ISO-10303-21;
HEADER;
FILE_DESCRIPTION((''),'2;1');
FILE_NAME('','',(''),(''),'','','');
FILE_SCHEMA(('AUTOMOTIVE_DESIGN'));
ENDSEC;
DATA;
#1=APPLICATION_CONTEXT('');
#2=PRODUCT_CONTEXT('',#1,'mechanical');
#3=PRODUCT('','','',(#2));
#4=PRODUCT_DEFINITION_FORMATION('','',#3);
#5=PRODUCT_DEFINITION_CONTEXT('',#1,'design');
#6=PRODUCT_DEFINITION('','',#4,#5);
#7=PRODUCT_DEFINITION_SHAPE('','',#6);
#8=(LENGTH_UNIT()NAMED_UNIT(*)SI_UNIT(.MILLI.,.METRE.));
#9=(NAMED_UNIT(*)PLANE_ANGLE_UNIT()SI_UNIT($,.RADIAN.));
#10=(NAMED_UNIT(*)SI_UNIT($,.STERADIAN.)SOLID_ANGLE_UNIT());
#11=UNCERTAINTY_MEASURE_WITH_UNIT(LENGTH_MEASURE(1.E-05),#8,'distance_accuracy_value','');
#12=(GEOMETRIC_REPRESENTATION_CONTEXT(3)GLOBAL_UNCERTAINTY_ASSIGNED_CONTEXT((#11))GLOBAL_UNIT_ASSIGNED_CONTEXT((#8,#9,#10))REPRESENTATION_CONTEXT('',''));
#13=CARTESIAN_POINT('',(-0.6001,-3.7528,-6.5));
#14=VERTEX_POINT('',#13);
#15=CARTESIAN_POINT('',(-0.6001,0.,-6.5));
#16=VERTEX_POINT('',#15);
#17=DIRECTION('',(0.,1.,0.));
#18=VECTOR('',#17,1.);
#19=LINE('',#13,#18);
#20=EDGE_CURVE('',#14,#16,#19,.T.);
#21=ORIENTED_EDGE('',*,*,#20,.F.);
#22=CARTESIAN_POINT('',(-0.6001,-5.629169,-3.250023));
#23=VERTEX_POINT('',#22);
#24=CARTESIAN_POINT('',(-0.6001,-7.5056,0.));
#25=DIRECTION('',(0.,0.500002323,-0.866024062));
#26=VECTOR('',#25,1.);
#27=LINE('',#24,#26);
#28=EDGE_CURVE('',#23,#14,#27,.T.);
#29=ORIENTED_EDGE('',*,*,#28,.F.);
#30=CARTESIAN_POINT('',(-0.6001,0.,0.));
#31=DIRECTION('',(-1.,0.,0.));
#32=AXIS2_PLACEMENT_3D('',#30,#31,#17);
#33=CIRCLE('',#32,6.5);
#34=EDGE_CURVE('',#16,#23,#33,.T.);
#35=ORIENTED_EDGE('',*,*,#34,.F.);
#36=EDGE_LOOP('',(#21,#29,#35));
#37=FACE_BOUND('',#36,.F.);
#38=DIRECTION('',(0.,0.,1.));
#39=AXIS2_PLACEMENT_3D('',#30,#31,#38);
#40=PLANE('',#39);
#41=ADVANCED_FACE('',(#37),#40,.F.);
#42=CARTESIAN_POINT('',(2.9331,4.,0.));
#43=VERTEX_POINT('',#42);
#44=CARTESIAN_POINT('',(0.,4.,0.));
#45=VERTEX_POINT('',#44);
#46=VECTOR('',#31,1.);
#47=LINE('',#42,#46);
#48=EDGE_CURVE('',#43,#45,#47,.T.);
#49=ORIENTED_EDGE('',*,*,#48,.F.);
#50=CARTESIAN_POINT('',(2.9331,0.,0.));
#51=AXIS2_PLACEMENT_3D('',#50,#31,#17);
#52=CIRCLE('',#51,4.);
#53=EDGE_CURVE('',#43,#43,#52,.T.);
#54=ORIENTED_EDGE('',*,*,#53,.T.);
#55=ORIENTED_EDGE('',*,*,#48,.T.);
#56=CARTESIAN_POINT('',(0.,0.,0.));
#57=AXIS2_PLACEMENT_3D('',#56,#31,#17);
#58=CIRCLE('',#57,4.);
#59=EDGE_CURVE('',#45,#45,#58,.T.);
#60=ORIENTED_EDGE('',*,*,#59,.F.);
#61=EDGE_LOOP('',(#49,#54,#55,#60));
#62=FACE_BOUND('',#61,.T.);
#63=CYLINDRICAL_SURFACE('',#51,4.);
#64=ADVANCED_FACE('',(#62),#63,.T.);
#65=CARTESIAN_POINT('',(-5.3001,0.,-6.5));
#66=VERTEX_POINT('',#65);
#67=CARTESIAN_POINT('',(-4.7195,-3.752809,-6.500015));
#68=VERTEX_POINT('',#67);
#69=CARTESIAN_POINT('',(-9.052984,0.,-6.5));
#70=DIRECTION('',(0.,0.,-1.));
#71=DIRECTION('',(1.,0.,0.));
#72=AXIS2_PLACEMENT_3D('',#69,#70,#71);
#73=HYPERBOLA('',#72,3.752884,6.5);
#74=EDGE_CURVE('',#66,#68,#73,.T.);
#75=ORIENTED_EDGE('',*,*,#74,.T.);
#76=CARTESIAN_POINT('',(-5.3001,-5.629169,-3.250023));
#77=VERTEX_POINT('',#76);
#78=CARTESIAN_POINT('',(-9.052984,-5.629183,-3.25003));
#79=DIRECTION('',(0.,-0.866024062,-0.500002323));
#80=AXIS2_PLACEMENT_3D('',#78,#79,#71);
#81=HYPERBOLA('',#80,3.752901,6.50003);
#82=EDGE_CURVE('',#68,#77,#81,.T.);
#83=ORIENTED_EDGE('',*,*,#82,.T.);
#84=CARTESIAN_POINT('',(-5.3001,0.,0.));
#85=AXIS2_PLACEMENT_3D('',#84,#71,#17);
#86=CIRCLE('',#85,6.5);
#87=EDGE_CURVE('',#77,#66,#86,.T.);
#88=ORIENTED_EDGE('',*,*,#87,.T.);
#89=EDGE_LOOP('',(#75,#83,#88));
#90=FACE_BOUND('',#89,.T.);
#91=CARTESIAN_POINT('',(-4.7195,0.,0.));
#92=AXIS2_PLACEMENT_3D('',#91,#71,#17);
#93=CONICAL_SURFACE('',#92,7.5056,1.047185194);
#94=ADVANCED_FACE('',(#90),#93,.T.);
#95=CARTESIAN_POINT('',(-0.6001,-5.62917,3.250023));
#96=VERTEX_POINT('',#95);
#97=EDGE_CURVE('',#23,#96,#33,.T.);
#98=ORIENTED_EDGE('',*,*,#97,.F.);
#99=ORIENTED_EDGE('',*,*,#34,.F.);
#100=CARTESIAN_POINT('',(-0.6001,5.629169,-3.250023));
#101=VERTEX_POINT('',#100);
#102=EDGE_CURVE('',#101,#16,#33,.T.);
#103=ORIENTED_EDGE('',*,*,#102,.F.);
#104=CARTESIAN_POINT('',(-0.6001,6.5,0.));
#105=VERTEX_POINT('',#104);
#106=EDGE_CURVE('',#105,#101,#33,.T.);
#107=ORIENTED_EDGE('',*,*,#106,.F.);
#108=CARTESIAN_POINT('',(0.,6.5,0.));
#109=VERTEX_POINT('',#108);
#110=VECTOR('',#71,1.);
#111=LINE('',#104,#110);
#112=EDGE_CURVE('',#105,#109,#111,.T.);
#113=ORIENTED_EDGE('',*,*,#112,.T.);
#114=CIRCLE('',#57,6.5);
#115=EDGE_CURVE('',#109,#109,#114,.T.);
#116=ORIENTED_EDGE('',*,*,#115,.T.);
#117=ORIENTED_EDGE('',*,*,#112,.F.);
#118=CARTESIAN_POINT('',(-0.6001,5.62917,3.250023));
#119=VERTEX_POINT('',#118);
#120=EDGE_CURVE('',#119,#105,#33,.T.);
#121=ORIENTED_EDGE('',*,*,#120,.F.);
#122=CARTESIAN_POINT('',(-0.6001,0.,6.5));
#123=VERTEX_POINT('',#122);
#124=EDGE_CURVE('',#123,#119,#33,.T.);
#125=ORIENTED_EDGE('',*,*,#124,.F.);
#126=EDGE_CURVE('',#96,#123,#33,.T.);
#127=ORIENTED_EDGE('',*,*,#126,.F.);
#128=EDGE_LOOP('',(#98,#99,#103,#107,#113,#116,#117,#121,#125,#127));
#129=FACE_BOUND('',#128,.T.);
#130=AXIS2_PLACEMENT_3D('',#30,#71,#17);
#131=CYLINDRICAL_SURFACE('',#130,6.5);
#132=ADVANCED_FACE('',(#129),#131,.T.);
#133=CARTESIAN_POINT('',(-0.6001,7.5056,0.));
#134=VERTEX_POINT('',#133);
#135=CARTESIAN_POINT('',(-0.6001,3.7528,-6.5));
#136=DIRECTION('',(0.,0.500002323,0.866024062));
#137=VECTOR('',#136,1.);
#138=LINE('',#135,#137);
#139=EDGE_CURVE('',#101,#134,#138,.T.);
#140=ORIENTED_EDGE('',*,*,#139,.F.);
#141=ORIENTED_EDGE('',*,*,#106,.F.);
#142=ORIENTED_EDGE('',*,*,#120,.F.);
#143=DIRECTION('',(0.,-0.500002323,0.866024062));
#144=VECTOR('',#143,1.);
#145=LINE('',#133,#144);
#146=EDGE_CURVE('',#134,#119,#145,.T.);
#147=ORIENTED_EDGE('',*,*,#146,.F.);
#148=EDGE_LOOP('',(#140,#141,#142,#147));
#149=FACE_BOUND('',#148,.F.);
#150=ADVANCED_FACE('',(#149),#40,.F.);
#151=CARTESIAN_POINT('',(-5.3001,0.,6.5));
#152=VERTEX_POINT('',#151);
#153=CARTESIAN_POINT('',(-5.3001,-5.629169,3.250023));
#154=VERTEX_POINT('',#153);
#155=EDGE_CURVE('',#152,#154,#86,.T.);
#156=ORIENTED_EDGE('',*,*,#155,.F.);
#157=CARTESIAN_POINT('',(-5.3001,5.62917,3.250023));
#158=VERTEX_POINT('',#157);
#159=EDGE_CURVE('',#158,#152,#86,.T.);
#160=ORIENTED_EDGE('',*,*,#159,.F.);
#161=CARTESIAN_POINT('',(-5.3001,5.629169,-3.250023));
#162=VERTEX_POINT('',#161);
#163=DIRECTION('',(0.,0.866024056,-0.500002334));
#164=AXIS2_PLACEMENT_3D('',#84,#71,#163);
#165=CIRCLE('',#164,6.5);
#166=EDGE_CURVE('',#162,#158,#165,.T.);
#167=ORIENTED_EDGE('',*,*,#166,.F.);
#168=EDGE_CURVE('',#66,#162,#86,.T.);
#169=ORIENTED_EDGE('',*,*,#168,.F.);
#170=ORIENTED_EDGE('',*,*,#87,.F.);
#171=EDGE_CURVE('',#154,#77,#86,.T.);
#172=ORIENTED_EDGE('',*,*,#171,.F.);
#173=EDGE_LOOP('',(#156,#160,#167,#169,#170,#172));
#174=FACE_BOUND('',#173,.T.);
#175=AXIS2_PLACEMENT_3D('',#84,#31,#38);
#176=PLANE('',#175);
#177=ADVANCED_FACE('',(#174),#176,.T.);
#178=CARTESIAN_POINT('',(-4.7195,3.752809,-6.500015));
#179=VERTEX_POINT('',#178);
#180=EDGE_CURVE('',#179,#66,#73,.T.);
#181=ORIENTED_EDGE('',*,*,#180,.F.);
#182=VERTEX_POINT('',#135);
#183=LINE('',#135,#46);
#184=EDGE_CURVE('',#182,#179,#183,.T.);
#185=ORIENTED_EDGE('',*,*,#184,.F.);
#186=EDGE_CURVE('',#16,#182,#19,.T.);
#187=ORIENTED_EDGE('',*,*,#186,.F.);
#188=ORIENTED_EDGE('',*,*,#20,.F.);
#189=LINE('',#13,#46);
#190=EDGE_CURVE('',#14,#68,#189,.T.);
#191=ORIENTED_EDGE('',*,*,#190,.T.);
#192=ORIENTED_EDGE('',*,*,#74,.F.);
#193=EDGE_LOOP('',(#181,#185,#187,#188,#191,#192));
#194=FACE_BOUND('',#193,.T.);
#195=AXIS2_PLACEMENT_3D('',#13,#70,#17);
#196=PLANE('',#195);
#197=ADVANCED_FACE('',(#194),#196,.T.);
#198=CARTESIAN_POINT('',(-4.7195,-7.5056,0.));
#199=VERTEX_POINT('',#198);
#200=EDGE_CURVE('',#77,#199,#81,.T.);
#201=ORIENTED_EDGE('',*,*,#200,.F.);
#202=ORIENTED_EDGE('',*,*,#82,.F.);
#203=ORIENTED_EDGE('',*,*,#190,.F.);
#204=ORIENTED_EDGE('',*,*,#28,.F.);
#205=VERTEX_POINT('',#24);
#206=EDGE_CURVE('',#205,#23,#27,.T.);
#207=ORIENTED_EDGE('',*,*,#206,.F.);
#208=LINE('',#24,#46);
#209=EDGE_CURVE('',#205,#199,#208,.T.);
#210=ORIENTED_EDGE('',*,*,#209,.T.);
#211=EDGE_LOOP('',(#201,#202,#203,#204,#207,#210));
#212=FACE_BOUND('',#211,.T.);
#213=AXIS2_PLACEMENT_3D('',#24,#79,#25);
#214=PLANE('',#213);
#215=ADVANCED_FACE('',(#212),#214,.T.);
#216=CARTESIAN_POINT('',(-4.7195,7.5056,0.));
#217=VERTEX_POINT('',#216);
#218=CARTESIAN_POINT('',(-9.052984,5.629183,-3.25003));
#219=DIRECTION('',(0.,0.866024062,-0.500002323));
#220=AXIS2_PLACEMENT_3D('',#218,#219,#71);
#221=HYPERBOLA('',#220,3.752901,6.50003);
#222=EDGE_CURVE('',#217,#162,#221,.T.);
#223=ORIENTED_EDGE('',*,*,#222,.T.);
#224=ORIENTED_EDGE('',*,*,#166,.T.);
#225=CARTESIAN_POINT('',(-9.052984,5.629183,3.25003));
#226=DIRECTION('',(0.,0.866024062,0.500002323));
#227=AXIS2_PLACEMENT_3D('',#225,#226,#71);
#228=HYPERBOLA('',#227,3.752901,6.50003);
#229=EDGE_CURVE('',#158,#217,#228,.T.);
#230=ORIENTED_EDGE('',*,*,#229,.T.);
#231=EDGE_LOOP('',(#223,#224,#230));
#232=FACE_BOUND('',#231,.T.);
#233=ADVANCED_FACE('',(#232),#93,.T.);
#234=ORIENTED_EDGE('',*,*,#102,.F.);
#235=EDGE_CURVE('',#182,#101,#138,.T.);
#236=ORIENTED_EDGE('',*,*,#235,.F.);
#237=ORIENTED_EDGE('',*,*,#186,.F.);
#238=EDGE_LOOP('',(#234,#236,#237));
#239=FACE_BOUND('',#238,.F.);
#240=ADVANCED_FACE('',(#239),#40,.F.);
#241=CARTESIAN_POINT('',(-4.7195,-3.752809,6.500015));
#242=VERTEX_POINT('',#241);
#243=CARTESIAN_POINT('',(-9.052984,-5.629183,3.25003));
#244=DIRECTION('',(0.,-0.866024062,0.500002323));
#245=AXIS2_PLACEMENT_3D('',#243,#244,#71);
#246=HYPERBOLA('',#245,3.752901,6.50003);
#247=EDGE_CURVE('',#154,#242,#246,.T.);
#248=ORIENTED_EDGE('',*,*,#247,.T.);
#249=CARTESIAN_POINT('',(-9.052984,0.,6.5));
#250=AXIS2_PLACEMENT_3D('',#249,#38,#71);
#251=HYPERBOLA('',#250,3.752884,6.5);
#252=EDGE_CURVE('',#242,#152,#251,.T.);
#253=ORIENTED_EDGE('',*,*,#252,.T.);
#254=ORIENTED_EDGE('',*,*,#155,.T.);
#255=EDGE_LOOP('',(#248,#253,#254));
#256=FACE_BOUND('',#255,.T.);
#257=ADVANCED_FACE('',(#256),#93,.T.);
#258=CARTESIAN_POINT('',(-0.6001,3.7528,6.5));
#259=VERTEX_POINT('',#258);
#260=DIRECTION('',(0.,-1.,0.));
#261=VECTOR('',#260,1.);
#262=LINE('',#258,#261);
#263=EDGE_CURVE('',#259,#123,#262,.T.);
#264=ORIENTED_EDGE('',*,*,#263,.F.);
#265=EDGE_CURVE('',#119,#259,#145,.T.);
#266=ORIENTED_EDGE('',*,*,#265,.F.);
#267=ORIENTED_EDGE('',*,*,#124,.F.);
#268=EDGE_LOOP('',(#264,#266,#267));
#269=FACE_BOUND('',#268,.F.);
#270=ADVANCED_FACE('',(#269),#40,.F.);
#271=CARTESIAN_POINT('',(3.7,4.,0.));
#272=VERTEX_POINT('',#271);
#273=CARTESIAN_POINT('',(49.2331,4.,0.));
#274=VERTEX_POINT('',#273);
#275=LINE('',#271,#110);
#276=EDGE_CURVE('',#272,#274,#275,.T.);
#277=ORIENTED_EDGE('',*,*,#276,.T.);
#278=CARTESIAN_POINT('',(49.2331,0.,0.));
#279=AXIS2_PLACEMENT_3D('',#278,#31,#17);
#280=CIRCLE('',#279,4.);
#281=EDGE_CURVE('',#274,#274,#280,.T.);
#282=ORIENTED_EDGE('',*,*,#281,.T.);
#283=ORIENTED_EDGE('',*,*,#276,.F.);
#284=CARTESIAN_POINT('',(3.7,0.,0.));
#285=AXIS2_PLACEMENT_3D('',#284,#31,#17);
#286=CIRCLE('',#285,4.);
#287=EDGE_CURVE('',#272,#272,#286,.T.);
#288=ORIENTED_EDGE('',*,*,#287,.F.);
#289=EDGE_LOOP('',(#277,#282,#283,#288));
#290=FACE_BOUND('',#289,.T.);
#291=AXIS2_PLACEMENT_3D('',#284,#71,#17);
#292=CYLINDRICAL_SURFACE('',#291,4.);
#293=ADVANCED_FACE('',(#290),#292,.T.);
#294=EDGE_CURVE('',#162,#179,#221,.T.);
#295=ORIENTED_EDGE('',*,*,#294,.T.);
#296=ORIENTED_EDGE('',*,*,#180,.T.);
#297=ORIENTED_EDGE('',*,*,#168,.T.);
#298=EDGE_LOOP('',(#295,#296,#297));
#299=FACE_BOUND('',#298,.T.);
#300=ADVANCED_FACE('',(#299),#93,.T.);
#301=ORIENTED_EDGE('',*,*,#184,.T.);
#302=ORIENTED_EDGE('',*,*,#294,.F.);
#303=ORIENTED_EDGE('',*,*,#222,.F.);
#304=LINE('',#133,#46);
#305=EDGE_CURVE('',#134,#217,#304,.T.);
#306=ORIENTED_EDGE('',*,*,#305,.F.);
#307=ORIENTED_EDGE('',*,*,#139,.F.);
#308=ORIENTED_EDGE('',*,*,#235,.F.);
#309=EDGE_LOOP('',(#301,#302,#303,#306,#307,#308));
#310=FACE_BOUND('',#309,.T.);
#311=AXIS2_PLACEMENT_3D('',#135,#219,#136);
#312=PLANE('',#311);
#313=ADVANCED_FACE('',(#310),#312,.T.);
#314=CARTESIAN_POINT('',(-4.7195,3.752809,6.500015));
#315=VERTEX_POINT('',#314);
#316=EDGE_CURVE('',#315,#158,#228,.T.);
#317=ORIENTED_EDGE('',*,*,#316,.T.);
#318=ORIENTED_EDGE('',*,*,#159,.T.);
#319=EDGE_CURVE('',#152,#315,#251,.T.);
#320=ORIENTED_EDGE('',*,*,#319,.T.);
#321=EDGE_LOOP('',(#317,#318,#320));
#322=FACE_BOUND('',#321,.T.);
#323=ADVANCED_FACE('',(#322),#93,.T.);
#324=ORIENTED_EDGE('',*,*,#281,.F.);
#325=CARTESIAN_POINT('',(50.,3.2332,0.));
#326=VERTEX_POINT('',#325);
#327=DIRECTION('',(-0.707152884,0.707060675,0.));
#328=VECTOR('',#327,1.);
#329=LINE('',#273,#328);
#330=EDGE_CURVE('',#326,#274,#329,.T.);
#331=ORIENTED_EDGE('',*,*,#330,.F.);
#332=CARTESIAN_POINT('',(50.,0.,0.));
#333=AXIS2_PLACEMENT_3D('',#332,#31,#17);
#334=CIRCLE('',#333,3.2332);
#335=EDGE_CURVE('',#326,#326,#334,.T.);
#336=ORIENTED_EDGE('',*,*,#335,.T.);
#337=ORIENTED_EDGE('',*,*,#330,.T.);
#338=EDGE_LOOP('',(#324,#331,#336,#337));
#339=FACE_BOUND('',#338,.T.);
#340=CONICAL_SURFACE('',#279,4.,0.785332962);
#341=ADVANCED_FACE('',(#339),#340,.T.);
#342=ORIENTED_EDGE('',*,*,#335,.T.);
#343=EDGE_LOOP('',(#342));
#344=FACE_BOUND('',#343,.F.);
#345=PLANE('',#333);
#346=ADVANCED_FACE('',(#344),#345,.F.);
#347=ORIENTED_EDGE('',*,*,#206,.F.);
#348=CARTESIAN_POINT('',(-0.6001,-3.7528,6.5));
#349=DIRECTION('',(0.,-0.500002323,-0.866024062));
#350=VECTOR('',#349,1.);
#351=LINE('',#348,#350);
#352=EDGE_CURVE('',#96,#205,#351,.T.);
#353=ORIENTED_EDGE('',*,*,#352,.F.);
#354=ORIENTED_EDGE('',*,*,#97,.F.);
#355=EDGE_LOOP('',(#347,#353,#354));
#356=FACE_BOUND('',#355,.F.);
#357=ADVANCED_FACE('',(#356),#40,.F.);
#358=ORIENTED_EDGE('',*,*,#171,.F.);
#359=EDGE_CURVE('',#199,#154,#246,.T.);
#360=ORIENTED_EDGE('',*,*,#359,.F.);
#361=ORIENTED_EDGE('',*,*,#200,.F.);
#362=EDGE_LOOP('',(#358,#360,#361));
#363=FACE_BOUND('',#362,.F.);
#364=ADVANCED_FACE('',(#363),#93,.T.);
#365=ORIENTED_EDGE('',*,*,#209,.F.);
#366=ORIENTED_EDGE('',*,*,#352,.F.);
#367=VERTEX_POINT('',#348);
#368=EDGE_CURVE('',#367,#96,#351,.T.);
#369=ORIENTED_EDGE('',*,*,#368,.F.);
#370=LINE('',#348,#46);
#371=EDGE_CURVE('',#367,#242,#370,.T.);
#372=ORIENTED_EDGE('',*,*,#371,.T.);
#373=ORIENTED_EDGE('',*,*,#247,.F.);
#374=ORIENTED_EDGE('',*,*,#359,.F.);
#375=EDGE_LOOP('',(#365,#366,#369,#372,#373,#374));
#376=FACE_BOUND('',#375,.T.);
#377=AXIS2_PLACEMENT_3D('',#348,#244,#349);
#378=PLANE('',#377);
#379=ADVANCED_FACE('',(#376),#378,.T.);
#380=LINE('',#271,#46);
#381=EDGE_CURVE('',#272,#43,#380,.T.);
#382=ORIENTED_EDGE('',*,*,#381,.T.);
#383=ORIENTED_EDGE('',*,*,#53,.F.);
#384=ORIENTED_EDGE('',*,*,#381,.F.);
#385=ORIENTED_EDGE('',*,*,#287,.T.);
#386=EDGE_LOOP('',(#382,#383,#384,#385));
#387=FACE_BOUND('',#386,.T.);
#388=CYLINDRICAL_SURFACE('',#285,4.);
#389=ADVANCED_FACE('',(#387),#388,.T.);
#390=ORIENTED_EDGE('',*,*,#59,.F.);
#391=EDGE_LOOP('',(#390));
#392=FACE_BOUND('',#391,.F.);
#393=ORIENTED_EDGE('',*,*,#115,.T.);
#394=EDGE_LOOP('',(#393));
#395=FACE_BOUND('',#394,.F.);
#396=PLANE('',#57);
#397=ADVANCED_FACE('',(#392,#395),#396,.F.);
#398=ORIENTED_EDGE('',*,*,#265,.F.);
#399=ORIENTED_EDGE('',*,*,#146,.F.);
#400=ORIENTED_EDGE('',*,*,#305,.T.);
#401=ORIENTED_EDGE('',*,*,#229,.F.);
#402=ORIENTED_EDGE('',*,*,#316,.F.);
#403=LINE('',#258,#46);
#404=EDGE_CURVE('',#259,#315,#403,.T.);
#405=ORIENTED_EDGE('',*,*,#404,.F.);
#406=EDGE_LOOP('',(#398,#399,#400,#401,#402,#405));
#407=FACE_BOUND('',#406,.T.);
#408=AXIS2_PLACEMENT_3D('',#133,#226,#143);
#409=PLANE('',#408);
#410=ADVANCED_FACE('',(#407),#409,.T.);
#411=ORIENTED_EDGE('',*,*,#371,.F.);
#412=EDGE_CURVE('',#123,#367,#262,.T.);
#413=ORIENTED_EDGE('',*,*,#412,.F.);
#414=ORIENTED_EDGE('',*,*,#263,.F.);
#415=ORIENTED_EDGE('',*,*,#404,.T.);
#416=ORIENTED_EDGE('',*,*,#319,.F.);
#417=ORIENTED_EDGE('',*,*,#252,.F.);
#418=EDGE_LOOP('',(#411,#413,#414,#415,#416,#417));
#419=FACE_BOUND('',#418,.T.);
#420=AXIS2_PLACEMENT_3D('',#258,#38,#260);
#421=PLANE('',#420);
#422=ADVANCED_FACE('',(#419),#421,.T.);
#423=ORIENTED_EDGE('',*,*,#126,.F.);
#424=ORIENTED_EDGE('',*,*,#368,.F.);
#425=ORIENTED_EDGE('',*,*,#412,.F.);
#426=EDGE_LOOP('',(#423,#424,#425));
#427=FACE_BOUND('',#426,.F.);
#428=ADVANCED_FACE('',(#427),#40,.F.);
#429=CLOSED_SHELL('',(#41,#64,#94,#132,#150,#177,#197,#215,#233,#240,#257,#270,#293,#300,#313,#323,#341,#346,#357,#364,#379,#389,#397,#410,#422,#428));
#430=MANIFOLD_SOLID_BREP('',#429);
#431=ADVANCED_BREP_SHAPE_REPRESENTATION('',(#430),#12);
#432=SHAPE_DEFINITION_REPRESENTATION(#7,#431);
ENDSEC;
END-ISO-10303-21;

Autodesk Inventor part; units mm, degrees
ref_plane "YZ Plane" through (0, 0, 0) normal (1, 0, 0) x (0, 1, 0)
ref_plane "XZ Plane" through (0, 0, 0) normal (0, 1, 0) x (-1, 0, 0)
sketch "Sketch1" plane through (0, 0, 0) normal (0, 0, 1) x (1, 0, 0)
  line L0 (0, 6.5) -> (0, 4)
  line L1 (3.7, 4) -> (50, 4)
  line L2 (50, 4) -> (50, 0)
  line L3 (50, 0) -> (-0.6001, 0)
  line L4 (-10.7201, 0) -> (60.12, 0) projected
  line L5 (-0.6001, 0) -> (-0.6001, 6.5)
  line L6 (-0.6001, 6.5) -> (0, 6.5)
  line L7 (3.7, 4) -> (2.9331, 4)
  line L8 (2.9331, 4) -> (0, 4)
  line L9 (0, -1.3) -> (0, 7.8) projected
  dimension "d0" = 50
  dimension "d1" = 46.3
  dimension "d2" = 8
  dimension "d9" = 0.6001
  dimension "d10" = 13
  dimension "d13" = 0.7669
  dimension "d14" = 8
revolve "Body" add sketch "Sketch1" angle 360 about axis through (50, 0, 0) along (-1, 0, 0)
sketch "Sketch2" plane through (-0.6001, 0, 0) normal (-1, 0, 0) x (0, 0, 1)
  line L0 (0, 7.5056) -> (6.5, 3.7528)
  line L1 (6.5, 3.7528) -> (6.5, -3.7528)
  line L2 (6.5, -3.7528) -> (0, -7.5056)
  line L3 (0, -7.5056) -> (-6.5, -3.7528)
  line L4 (-6.5, -3.7528) -> (-6.5, 3.7528)
  line L5 (-6.5, 3.7528) -> (0, 7.5056)
  point P0 (0, 0)
  point P1 (0, 0)
  dimension "d11" = 13
extrude "Head" add sketch "Sketch2" along normal blind 4.7
sketch "Sketch4" plane through (0, 0, 0) normal (0, 0, 1) x (1, 0, 0)
  line L0 (-5.3001, 6.5) -> (-5.3001, 7.5056)
  line L1 (-5.3001, 7.5056) -> (-4.7195, 7.5056)
  line L2 (-4.7195, 7.5056) -> (-5.3001, 6.5)
  line L3 (-6.2401, 0) -> (0.3399, 0) projected
  line L4 (-0.6001, 7.5056) -> (-5.3001, 7.5056) projected
  line L5 (-5.3001, 3.7528) -> (-5.3001, 7.5056) projected
  dimension "d5" = 30
  dimension "d19" = 13
revolve "Chamfer1" cut sketch "Sketch4" angle 360 about axis through (-10, 0, 0) along (1, 0, 0)
thread "Thread" size "M8x1.25" class "6g" standard "ISO Metric profile" length 46.3
chamfer "Chamfer2" distance 0.7668 distance2 0.7669 1 edges at (50, -4, 0) measured on face at (50, 1.2946, -0.3191)
ref_plane "Work Plane1" through (1.525, 0, 0) normal (0, 0, 1) x (1, 0, 0)
equation "\"d11\" = SW"
equation "\"d3\" = KOH - SD"
equation "\"d15\" = GEL"
equation "\"d6\" = -0.5 * SPD + 0.5 * GD"
equation "\"d0\" = NLG"
equation "\"d1\" = GEL"
equation "\"d2\" = GD"
equation "\"d10\" = SD2"
equation "\"d14\" = BDM"
equation "\"d5\" = ANG1"
equation "\"d19\" = SW0"
equation "\"NLG\" = 50"
equation "\"GD\" = NND"
equation "\"BDM\" = NND"
equation "\"KOH\" = 5.3"
equation "\"GEL\" = 46.3"
equation "\"SW\" = 13"
equation "\"SW0\" = SW"
equation "\"SPD\" = NND - 1.2269 * PTC"
equation "\"SD2\" = SW"
equation "\"SD\" = 0.6"
equation "\"ANG1\" = 30deg"
equation "\"GAL\" = 0.61345 * PTC"
equation "\"GUL\" = 0.61345 * PTC"
equation "\"RR\" = 0.4"
equation "\"WFT\" = SD"
equation "\"GD1\" = THREADDIA - 1.2269 * PTC"
equation "\"THREADDIA\" = 8"
equation "\"SDH\" = SW"
equation "\"TOA\" = 30deg"
equation "\"FAWI\" = 45deg"
equation "\"PTC\" = 1.25"
equation "\"NND\" = 8"
equation "\"E0\" = 1.155 * SW"
properties part number "AS 1110 - M8 x 50" material "Steel, Mild"
